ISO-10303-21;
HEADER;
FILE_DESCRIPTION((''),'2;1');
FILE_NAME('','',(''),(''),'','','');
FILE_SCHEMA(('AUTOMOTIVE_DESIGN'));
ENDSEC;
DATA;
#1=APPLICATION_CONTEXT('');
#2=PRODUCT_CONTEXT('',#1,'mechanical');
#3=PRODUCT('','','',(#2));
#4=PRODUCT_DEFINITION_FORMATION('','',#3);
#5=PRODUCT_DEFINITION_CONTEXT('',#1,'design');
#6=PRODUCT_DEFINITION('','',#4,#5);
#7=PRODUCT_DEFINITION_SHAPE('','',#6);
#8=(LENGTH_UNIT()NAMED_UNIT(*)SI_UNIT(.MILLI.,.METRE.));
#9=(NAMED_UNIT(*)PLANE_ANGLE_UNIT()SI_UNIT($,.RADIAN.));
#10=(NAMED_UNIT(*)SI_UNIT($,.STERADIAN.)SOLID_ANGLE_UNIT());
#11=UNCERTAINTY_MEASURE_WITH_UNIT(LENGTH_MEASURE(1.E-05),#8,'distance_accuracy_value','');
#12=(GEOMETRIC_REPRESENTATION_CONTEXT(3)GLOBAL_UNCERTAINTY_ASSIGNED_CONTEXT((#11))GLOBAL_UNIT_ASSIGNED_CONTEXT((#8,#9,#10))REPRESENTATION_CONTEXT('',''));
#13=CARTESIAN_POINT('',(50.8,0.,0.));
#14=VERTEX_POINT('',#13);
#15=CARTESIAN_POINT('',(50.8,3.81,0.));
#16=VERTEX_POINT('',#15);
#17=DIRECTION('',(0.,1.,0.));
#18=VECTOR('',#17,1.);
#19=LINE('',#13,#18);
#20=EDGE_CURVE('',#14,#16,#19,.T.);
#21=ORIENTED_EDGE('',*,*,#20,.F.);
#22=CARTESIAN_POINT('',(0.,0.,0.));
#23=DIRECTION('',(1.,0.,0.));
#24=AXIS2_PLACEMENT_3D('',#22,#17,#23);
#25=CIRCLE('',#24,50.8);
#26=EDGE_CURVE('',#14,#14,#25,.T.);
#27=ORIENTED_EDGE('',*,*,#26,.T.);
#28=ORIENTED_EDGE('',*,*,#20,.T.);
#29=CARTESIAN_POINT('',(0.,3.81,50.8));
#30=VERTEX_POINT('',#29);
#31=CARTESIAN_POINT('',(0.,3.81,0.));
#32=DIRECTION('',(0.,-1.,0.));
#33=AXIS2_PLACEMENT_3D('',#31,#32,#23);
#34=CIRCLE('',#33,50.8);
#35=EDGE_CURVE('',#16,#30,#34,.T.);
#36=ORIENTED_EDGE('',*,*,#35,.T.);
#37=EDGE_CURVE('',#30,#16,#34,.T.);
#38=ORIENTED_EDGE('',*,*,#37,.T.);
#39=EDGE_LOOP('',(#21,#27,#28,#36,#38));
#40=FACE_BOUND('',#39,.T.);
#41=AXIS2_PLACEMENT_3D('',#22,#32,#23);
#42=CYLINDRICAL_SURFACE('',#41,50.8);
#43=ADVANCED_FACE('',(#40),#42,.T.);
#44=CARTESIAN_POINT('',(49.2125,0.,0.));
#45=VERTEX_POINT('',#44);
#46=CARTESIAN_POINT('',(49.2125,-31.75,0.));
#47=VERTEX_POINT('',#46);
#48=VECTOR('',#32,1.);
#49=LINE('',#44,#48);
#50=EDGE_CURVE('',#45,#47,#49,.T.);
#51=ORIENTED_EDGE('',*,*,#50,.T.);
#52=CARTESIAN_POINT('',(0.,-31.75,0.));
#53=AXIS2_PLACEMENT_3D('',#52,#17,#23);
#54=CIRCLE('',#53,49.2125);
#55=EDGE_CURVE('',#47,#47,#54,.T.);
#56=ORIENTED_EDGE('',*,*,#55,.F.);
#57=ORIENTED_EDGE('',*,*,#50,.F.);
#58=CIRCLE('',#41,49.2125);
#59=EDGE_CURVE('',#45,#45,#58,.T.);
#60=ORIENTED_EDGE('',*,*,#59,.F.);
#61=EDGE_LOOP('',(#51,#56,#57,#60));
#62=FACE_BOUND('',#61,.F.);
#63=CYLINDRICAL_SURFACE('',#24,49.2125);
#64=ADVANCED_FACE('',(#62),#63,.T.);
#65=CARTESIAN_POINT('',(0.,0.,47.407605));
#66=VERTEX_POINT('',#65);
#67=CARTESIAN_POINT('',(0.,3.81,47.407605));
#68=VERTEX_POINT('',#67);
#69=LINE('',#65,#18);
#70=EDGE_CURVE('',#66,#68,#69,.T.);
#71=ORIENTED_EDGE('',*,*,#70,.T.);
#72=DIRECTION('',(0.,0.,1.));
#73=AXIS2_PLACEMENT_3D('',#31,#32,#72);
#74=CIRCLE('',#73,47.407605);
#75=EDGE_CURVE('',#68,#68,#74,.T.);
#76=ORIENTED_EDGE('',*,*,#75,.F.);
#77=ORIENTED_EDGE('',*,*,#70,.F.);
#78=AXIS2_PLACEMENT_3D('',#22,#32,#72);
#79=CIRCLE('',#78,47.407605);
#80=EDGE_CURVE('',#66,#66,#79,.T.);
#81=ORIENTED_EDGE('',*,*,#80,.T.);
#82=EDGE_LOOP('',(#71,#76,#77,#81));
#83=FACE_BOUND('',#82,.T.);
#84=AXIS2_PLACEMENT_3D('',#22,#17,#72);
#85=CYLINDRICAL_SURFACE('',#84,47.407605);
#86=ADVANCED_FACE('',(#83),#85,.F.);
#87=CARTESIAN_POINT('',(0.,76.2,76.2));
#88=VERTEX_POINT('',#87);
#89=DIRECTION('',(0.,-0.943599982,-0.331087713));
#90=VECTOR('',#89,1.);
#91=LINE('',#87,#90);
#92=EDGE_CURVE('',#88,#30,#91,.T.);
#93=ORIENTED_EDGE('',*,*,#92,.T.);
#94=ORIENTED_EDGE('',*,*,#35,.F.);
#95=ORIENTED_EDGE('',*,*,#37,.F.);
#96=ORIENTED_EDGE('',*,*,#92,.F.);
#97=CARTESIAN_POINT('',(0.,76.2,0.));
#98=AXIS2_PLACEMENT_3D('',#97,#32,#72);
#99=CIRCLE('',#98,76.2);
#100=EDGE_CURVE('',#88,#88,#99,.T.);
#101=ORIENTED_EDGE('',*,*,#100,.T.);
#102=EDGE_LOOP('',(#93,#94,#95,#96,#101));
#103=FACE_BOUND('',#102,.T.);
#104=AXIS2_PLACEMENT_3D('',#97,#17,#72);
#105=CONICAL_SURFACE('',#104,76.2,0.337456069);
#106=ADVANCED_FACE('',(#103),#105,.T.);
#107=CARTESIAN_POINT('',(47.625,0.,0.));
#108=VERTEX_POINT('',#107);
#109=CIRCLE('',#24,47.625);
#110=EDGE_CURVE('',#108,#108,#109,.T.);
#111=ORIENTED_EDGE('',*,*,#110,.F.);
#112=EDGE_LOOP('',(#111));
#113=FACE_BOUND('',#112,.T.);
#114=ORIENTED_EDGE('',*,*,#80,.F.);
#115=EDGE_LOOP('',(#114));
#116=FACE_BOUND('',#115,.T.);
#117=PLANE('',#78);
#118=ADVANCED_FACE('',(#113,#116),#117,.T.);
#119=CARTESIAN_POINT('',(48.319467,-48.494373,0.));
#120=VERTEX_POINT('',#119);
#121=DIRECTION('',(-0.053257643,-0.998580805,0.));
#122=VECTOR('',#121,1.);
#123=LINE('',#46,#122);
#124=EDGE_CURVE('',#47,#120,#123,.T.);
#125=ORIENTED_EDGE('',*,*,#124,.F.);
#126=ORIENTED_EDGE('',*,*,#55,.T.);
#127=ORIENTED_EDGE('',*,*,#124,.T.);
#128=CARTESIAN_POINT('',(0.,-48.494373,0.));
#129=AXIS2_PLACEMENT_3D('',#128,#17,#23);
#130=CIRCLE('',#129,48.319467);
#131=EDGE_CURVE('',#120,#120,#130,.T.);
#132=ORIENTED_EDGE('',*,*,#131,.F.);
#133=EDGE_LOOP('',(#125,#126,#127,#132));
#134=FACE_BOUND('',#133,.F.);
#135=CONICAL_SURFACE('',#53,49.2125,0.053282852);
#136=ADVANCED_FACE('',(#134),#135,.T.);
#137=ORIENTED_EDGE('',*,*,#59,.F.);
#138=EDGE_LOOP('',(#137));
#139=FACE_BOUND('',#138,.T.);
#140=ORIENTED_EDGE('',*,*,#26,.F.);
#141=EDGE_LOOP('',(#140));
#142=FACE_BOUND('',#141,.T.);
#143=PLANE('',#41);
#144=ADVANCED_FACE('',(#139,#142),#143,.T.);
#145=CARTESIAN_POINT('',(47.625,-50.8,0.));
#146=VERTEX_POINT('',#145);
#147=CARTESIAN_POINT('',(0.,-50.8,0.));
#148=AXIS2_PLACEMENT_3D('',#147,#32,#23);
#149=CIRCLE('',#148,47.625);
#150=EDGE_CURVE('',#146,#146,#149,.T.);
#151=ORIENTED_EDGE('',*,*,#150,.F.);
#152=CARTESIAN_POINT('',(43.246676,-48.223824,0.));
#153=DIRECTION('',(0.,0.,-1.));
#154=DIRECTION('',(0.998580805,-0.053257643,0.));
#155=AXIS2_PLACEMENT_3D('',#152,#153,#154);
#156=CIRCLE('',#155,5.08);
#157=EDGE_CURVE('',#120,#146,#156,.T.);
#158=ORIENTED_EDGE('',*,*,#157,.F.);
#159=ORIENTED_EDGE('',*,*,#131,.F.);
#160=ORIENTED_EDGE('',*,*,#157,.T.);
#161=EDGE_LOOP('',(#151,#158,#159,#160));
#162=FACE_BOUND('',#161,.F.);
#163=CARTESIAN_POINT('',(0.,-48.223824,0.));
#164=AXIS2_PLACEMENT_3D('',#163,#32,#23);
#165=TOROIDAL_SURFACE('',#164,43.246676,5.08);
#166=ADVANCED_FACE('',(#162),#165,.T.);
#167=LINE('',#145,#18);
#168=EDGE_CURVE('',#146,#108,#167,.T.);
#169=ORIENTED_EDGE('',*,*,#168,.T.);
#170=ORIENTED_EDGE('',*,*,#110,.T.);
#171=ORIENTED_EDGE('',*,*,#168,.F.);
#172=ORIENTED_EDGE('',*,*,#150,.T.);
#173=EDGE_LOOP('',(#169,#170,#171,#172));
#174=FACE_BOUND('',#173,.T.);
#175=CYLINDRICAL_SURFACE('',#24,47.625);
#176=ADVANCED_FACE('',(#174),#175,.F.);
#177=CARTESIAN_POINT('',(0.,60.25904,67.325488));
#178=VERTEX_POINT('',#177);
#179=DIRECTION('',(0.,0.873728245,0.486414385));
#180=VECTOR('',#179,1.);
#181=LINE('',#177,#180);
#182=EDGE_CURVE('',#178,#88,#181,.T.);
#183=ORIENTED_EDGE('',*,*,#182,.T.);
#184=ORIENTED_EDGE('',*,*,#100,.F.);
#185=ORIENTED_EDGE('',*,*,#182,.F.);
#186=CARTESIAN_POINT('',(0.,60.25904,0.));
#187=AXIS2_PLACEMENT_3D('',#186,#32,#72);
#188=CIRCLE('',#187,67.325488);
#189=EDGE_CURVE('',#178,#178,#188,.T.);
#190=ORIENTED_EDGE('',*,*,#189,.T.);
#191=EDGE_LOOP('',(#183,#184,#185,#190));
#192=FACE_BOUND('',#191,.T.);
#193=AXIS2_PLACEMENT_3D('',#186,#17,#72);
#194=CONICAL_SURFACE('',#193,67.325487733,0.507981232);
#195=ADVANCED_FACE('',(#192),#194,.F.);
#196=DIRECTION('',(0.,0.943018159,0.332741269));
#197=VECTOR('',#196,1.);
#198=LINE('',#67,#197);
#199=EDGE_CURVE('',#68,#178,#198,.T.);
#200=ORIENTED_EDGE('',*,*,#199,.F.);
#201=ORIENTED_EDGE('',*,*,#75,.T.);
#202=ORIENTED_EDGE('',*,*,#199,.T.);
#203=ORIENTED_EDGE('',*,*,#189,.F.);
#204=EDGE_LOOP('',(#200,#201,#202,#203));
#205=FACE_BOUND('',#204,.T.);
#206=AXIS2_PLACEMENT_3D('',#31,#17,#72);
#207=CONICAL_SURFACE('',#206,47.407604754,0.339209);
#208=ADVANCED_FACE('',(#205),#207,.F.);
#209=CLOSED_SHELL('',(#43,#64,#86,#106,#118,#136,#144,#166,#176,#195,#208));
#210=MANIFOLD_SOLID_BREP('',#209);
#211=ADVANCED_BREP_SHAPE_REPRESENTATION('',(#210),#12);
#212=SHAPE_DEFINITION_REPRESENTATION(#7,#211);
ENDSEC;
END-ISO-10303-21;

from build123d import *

# Parameters (mm, degrees)
F0_R          = 50.8
F0_R_2        = 47.625
F1_DEPTH      = 3.81
F1_DEPTH_BACK = 50.8
F2_R          = 50.8
F2_R_2        = 49.2125
F3_DEPTH      = 50.801
F4_SIZE2      = 1.016
F4_SIZE       = 19.05


# Not quite as in the source:
# - a fillet or chamfer that OpenCascade refuses, or shapes differently, is made with other operations: its cross-section is extruded or revolved along the edge and cut away or added


with BuildPart() as f1:
    # F0 (on Front) → F1 (new body, two sides)
    with BuildSketch(Plane.XZ) as f1_sk:
        Circle(F0_R)
        Circle(F0_R_2, mode=Mode.SUBTRACT)
    extrude(amount=-F1_DEPTH)
    extrude(f1_sk.sketch, amount=F1_DEPTH_BACK)

    # F2 (on Front) → F3 (cut, through all)
    with BuildSketch(Plane.XZ):
        Circle(F2_R)
        Circle(F2_R_2, mode=Mode.SUBTRACT)
    extrude(amount=F3_DEPTH, mode=Mode.SUBTRACT)

    # F4
    f4_edges = [f1.edges().sort_by_distance(p)[0] for p in [
        (-49.2125, -50.8, 0),
    ]]
    chamfer(f4_edges, length=F4_SIZE, length2=F4_SIZE2)

    # F5: fillet of radius 5.08 on 1 edges, made by hand

    # F5_s1 → F5_t2 (revolve, cut)
    with BuildSketch(Plane.XY):
        with BuildLine():
            ThreePointArc((48.3194667684, -48.4943730928), (48.1108173968, -49.6889287689), (47.625, -50.8))
            Line((47.625, -50.8), (48.1965, -50.8))
            Line((48.1965, -50.8), (48.3194667684, -48.4943730928))
        make_face()
    revolve(axis=Axis((0, -50.8, 0), (0, 1, 0)), mode=Mode.SUBTRACT)

    # F6 (on Right) → F7 (revolve)
    with BuildSketch(Plane.YZ):
        Polygon((76.2, 76.2), (3.81, 50.8), (0, 50.8), (0, 47.407604754), (3.81, 47.407604754), (60.2590404451, 67.3254877329), align=None)
    revolve(axis=Axis((0, 38.1, 0), (0, -1, 0)))


solid = f1.part
